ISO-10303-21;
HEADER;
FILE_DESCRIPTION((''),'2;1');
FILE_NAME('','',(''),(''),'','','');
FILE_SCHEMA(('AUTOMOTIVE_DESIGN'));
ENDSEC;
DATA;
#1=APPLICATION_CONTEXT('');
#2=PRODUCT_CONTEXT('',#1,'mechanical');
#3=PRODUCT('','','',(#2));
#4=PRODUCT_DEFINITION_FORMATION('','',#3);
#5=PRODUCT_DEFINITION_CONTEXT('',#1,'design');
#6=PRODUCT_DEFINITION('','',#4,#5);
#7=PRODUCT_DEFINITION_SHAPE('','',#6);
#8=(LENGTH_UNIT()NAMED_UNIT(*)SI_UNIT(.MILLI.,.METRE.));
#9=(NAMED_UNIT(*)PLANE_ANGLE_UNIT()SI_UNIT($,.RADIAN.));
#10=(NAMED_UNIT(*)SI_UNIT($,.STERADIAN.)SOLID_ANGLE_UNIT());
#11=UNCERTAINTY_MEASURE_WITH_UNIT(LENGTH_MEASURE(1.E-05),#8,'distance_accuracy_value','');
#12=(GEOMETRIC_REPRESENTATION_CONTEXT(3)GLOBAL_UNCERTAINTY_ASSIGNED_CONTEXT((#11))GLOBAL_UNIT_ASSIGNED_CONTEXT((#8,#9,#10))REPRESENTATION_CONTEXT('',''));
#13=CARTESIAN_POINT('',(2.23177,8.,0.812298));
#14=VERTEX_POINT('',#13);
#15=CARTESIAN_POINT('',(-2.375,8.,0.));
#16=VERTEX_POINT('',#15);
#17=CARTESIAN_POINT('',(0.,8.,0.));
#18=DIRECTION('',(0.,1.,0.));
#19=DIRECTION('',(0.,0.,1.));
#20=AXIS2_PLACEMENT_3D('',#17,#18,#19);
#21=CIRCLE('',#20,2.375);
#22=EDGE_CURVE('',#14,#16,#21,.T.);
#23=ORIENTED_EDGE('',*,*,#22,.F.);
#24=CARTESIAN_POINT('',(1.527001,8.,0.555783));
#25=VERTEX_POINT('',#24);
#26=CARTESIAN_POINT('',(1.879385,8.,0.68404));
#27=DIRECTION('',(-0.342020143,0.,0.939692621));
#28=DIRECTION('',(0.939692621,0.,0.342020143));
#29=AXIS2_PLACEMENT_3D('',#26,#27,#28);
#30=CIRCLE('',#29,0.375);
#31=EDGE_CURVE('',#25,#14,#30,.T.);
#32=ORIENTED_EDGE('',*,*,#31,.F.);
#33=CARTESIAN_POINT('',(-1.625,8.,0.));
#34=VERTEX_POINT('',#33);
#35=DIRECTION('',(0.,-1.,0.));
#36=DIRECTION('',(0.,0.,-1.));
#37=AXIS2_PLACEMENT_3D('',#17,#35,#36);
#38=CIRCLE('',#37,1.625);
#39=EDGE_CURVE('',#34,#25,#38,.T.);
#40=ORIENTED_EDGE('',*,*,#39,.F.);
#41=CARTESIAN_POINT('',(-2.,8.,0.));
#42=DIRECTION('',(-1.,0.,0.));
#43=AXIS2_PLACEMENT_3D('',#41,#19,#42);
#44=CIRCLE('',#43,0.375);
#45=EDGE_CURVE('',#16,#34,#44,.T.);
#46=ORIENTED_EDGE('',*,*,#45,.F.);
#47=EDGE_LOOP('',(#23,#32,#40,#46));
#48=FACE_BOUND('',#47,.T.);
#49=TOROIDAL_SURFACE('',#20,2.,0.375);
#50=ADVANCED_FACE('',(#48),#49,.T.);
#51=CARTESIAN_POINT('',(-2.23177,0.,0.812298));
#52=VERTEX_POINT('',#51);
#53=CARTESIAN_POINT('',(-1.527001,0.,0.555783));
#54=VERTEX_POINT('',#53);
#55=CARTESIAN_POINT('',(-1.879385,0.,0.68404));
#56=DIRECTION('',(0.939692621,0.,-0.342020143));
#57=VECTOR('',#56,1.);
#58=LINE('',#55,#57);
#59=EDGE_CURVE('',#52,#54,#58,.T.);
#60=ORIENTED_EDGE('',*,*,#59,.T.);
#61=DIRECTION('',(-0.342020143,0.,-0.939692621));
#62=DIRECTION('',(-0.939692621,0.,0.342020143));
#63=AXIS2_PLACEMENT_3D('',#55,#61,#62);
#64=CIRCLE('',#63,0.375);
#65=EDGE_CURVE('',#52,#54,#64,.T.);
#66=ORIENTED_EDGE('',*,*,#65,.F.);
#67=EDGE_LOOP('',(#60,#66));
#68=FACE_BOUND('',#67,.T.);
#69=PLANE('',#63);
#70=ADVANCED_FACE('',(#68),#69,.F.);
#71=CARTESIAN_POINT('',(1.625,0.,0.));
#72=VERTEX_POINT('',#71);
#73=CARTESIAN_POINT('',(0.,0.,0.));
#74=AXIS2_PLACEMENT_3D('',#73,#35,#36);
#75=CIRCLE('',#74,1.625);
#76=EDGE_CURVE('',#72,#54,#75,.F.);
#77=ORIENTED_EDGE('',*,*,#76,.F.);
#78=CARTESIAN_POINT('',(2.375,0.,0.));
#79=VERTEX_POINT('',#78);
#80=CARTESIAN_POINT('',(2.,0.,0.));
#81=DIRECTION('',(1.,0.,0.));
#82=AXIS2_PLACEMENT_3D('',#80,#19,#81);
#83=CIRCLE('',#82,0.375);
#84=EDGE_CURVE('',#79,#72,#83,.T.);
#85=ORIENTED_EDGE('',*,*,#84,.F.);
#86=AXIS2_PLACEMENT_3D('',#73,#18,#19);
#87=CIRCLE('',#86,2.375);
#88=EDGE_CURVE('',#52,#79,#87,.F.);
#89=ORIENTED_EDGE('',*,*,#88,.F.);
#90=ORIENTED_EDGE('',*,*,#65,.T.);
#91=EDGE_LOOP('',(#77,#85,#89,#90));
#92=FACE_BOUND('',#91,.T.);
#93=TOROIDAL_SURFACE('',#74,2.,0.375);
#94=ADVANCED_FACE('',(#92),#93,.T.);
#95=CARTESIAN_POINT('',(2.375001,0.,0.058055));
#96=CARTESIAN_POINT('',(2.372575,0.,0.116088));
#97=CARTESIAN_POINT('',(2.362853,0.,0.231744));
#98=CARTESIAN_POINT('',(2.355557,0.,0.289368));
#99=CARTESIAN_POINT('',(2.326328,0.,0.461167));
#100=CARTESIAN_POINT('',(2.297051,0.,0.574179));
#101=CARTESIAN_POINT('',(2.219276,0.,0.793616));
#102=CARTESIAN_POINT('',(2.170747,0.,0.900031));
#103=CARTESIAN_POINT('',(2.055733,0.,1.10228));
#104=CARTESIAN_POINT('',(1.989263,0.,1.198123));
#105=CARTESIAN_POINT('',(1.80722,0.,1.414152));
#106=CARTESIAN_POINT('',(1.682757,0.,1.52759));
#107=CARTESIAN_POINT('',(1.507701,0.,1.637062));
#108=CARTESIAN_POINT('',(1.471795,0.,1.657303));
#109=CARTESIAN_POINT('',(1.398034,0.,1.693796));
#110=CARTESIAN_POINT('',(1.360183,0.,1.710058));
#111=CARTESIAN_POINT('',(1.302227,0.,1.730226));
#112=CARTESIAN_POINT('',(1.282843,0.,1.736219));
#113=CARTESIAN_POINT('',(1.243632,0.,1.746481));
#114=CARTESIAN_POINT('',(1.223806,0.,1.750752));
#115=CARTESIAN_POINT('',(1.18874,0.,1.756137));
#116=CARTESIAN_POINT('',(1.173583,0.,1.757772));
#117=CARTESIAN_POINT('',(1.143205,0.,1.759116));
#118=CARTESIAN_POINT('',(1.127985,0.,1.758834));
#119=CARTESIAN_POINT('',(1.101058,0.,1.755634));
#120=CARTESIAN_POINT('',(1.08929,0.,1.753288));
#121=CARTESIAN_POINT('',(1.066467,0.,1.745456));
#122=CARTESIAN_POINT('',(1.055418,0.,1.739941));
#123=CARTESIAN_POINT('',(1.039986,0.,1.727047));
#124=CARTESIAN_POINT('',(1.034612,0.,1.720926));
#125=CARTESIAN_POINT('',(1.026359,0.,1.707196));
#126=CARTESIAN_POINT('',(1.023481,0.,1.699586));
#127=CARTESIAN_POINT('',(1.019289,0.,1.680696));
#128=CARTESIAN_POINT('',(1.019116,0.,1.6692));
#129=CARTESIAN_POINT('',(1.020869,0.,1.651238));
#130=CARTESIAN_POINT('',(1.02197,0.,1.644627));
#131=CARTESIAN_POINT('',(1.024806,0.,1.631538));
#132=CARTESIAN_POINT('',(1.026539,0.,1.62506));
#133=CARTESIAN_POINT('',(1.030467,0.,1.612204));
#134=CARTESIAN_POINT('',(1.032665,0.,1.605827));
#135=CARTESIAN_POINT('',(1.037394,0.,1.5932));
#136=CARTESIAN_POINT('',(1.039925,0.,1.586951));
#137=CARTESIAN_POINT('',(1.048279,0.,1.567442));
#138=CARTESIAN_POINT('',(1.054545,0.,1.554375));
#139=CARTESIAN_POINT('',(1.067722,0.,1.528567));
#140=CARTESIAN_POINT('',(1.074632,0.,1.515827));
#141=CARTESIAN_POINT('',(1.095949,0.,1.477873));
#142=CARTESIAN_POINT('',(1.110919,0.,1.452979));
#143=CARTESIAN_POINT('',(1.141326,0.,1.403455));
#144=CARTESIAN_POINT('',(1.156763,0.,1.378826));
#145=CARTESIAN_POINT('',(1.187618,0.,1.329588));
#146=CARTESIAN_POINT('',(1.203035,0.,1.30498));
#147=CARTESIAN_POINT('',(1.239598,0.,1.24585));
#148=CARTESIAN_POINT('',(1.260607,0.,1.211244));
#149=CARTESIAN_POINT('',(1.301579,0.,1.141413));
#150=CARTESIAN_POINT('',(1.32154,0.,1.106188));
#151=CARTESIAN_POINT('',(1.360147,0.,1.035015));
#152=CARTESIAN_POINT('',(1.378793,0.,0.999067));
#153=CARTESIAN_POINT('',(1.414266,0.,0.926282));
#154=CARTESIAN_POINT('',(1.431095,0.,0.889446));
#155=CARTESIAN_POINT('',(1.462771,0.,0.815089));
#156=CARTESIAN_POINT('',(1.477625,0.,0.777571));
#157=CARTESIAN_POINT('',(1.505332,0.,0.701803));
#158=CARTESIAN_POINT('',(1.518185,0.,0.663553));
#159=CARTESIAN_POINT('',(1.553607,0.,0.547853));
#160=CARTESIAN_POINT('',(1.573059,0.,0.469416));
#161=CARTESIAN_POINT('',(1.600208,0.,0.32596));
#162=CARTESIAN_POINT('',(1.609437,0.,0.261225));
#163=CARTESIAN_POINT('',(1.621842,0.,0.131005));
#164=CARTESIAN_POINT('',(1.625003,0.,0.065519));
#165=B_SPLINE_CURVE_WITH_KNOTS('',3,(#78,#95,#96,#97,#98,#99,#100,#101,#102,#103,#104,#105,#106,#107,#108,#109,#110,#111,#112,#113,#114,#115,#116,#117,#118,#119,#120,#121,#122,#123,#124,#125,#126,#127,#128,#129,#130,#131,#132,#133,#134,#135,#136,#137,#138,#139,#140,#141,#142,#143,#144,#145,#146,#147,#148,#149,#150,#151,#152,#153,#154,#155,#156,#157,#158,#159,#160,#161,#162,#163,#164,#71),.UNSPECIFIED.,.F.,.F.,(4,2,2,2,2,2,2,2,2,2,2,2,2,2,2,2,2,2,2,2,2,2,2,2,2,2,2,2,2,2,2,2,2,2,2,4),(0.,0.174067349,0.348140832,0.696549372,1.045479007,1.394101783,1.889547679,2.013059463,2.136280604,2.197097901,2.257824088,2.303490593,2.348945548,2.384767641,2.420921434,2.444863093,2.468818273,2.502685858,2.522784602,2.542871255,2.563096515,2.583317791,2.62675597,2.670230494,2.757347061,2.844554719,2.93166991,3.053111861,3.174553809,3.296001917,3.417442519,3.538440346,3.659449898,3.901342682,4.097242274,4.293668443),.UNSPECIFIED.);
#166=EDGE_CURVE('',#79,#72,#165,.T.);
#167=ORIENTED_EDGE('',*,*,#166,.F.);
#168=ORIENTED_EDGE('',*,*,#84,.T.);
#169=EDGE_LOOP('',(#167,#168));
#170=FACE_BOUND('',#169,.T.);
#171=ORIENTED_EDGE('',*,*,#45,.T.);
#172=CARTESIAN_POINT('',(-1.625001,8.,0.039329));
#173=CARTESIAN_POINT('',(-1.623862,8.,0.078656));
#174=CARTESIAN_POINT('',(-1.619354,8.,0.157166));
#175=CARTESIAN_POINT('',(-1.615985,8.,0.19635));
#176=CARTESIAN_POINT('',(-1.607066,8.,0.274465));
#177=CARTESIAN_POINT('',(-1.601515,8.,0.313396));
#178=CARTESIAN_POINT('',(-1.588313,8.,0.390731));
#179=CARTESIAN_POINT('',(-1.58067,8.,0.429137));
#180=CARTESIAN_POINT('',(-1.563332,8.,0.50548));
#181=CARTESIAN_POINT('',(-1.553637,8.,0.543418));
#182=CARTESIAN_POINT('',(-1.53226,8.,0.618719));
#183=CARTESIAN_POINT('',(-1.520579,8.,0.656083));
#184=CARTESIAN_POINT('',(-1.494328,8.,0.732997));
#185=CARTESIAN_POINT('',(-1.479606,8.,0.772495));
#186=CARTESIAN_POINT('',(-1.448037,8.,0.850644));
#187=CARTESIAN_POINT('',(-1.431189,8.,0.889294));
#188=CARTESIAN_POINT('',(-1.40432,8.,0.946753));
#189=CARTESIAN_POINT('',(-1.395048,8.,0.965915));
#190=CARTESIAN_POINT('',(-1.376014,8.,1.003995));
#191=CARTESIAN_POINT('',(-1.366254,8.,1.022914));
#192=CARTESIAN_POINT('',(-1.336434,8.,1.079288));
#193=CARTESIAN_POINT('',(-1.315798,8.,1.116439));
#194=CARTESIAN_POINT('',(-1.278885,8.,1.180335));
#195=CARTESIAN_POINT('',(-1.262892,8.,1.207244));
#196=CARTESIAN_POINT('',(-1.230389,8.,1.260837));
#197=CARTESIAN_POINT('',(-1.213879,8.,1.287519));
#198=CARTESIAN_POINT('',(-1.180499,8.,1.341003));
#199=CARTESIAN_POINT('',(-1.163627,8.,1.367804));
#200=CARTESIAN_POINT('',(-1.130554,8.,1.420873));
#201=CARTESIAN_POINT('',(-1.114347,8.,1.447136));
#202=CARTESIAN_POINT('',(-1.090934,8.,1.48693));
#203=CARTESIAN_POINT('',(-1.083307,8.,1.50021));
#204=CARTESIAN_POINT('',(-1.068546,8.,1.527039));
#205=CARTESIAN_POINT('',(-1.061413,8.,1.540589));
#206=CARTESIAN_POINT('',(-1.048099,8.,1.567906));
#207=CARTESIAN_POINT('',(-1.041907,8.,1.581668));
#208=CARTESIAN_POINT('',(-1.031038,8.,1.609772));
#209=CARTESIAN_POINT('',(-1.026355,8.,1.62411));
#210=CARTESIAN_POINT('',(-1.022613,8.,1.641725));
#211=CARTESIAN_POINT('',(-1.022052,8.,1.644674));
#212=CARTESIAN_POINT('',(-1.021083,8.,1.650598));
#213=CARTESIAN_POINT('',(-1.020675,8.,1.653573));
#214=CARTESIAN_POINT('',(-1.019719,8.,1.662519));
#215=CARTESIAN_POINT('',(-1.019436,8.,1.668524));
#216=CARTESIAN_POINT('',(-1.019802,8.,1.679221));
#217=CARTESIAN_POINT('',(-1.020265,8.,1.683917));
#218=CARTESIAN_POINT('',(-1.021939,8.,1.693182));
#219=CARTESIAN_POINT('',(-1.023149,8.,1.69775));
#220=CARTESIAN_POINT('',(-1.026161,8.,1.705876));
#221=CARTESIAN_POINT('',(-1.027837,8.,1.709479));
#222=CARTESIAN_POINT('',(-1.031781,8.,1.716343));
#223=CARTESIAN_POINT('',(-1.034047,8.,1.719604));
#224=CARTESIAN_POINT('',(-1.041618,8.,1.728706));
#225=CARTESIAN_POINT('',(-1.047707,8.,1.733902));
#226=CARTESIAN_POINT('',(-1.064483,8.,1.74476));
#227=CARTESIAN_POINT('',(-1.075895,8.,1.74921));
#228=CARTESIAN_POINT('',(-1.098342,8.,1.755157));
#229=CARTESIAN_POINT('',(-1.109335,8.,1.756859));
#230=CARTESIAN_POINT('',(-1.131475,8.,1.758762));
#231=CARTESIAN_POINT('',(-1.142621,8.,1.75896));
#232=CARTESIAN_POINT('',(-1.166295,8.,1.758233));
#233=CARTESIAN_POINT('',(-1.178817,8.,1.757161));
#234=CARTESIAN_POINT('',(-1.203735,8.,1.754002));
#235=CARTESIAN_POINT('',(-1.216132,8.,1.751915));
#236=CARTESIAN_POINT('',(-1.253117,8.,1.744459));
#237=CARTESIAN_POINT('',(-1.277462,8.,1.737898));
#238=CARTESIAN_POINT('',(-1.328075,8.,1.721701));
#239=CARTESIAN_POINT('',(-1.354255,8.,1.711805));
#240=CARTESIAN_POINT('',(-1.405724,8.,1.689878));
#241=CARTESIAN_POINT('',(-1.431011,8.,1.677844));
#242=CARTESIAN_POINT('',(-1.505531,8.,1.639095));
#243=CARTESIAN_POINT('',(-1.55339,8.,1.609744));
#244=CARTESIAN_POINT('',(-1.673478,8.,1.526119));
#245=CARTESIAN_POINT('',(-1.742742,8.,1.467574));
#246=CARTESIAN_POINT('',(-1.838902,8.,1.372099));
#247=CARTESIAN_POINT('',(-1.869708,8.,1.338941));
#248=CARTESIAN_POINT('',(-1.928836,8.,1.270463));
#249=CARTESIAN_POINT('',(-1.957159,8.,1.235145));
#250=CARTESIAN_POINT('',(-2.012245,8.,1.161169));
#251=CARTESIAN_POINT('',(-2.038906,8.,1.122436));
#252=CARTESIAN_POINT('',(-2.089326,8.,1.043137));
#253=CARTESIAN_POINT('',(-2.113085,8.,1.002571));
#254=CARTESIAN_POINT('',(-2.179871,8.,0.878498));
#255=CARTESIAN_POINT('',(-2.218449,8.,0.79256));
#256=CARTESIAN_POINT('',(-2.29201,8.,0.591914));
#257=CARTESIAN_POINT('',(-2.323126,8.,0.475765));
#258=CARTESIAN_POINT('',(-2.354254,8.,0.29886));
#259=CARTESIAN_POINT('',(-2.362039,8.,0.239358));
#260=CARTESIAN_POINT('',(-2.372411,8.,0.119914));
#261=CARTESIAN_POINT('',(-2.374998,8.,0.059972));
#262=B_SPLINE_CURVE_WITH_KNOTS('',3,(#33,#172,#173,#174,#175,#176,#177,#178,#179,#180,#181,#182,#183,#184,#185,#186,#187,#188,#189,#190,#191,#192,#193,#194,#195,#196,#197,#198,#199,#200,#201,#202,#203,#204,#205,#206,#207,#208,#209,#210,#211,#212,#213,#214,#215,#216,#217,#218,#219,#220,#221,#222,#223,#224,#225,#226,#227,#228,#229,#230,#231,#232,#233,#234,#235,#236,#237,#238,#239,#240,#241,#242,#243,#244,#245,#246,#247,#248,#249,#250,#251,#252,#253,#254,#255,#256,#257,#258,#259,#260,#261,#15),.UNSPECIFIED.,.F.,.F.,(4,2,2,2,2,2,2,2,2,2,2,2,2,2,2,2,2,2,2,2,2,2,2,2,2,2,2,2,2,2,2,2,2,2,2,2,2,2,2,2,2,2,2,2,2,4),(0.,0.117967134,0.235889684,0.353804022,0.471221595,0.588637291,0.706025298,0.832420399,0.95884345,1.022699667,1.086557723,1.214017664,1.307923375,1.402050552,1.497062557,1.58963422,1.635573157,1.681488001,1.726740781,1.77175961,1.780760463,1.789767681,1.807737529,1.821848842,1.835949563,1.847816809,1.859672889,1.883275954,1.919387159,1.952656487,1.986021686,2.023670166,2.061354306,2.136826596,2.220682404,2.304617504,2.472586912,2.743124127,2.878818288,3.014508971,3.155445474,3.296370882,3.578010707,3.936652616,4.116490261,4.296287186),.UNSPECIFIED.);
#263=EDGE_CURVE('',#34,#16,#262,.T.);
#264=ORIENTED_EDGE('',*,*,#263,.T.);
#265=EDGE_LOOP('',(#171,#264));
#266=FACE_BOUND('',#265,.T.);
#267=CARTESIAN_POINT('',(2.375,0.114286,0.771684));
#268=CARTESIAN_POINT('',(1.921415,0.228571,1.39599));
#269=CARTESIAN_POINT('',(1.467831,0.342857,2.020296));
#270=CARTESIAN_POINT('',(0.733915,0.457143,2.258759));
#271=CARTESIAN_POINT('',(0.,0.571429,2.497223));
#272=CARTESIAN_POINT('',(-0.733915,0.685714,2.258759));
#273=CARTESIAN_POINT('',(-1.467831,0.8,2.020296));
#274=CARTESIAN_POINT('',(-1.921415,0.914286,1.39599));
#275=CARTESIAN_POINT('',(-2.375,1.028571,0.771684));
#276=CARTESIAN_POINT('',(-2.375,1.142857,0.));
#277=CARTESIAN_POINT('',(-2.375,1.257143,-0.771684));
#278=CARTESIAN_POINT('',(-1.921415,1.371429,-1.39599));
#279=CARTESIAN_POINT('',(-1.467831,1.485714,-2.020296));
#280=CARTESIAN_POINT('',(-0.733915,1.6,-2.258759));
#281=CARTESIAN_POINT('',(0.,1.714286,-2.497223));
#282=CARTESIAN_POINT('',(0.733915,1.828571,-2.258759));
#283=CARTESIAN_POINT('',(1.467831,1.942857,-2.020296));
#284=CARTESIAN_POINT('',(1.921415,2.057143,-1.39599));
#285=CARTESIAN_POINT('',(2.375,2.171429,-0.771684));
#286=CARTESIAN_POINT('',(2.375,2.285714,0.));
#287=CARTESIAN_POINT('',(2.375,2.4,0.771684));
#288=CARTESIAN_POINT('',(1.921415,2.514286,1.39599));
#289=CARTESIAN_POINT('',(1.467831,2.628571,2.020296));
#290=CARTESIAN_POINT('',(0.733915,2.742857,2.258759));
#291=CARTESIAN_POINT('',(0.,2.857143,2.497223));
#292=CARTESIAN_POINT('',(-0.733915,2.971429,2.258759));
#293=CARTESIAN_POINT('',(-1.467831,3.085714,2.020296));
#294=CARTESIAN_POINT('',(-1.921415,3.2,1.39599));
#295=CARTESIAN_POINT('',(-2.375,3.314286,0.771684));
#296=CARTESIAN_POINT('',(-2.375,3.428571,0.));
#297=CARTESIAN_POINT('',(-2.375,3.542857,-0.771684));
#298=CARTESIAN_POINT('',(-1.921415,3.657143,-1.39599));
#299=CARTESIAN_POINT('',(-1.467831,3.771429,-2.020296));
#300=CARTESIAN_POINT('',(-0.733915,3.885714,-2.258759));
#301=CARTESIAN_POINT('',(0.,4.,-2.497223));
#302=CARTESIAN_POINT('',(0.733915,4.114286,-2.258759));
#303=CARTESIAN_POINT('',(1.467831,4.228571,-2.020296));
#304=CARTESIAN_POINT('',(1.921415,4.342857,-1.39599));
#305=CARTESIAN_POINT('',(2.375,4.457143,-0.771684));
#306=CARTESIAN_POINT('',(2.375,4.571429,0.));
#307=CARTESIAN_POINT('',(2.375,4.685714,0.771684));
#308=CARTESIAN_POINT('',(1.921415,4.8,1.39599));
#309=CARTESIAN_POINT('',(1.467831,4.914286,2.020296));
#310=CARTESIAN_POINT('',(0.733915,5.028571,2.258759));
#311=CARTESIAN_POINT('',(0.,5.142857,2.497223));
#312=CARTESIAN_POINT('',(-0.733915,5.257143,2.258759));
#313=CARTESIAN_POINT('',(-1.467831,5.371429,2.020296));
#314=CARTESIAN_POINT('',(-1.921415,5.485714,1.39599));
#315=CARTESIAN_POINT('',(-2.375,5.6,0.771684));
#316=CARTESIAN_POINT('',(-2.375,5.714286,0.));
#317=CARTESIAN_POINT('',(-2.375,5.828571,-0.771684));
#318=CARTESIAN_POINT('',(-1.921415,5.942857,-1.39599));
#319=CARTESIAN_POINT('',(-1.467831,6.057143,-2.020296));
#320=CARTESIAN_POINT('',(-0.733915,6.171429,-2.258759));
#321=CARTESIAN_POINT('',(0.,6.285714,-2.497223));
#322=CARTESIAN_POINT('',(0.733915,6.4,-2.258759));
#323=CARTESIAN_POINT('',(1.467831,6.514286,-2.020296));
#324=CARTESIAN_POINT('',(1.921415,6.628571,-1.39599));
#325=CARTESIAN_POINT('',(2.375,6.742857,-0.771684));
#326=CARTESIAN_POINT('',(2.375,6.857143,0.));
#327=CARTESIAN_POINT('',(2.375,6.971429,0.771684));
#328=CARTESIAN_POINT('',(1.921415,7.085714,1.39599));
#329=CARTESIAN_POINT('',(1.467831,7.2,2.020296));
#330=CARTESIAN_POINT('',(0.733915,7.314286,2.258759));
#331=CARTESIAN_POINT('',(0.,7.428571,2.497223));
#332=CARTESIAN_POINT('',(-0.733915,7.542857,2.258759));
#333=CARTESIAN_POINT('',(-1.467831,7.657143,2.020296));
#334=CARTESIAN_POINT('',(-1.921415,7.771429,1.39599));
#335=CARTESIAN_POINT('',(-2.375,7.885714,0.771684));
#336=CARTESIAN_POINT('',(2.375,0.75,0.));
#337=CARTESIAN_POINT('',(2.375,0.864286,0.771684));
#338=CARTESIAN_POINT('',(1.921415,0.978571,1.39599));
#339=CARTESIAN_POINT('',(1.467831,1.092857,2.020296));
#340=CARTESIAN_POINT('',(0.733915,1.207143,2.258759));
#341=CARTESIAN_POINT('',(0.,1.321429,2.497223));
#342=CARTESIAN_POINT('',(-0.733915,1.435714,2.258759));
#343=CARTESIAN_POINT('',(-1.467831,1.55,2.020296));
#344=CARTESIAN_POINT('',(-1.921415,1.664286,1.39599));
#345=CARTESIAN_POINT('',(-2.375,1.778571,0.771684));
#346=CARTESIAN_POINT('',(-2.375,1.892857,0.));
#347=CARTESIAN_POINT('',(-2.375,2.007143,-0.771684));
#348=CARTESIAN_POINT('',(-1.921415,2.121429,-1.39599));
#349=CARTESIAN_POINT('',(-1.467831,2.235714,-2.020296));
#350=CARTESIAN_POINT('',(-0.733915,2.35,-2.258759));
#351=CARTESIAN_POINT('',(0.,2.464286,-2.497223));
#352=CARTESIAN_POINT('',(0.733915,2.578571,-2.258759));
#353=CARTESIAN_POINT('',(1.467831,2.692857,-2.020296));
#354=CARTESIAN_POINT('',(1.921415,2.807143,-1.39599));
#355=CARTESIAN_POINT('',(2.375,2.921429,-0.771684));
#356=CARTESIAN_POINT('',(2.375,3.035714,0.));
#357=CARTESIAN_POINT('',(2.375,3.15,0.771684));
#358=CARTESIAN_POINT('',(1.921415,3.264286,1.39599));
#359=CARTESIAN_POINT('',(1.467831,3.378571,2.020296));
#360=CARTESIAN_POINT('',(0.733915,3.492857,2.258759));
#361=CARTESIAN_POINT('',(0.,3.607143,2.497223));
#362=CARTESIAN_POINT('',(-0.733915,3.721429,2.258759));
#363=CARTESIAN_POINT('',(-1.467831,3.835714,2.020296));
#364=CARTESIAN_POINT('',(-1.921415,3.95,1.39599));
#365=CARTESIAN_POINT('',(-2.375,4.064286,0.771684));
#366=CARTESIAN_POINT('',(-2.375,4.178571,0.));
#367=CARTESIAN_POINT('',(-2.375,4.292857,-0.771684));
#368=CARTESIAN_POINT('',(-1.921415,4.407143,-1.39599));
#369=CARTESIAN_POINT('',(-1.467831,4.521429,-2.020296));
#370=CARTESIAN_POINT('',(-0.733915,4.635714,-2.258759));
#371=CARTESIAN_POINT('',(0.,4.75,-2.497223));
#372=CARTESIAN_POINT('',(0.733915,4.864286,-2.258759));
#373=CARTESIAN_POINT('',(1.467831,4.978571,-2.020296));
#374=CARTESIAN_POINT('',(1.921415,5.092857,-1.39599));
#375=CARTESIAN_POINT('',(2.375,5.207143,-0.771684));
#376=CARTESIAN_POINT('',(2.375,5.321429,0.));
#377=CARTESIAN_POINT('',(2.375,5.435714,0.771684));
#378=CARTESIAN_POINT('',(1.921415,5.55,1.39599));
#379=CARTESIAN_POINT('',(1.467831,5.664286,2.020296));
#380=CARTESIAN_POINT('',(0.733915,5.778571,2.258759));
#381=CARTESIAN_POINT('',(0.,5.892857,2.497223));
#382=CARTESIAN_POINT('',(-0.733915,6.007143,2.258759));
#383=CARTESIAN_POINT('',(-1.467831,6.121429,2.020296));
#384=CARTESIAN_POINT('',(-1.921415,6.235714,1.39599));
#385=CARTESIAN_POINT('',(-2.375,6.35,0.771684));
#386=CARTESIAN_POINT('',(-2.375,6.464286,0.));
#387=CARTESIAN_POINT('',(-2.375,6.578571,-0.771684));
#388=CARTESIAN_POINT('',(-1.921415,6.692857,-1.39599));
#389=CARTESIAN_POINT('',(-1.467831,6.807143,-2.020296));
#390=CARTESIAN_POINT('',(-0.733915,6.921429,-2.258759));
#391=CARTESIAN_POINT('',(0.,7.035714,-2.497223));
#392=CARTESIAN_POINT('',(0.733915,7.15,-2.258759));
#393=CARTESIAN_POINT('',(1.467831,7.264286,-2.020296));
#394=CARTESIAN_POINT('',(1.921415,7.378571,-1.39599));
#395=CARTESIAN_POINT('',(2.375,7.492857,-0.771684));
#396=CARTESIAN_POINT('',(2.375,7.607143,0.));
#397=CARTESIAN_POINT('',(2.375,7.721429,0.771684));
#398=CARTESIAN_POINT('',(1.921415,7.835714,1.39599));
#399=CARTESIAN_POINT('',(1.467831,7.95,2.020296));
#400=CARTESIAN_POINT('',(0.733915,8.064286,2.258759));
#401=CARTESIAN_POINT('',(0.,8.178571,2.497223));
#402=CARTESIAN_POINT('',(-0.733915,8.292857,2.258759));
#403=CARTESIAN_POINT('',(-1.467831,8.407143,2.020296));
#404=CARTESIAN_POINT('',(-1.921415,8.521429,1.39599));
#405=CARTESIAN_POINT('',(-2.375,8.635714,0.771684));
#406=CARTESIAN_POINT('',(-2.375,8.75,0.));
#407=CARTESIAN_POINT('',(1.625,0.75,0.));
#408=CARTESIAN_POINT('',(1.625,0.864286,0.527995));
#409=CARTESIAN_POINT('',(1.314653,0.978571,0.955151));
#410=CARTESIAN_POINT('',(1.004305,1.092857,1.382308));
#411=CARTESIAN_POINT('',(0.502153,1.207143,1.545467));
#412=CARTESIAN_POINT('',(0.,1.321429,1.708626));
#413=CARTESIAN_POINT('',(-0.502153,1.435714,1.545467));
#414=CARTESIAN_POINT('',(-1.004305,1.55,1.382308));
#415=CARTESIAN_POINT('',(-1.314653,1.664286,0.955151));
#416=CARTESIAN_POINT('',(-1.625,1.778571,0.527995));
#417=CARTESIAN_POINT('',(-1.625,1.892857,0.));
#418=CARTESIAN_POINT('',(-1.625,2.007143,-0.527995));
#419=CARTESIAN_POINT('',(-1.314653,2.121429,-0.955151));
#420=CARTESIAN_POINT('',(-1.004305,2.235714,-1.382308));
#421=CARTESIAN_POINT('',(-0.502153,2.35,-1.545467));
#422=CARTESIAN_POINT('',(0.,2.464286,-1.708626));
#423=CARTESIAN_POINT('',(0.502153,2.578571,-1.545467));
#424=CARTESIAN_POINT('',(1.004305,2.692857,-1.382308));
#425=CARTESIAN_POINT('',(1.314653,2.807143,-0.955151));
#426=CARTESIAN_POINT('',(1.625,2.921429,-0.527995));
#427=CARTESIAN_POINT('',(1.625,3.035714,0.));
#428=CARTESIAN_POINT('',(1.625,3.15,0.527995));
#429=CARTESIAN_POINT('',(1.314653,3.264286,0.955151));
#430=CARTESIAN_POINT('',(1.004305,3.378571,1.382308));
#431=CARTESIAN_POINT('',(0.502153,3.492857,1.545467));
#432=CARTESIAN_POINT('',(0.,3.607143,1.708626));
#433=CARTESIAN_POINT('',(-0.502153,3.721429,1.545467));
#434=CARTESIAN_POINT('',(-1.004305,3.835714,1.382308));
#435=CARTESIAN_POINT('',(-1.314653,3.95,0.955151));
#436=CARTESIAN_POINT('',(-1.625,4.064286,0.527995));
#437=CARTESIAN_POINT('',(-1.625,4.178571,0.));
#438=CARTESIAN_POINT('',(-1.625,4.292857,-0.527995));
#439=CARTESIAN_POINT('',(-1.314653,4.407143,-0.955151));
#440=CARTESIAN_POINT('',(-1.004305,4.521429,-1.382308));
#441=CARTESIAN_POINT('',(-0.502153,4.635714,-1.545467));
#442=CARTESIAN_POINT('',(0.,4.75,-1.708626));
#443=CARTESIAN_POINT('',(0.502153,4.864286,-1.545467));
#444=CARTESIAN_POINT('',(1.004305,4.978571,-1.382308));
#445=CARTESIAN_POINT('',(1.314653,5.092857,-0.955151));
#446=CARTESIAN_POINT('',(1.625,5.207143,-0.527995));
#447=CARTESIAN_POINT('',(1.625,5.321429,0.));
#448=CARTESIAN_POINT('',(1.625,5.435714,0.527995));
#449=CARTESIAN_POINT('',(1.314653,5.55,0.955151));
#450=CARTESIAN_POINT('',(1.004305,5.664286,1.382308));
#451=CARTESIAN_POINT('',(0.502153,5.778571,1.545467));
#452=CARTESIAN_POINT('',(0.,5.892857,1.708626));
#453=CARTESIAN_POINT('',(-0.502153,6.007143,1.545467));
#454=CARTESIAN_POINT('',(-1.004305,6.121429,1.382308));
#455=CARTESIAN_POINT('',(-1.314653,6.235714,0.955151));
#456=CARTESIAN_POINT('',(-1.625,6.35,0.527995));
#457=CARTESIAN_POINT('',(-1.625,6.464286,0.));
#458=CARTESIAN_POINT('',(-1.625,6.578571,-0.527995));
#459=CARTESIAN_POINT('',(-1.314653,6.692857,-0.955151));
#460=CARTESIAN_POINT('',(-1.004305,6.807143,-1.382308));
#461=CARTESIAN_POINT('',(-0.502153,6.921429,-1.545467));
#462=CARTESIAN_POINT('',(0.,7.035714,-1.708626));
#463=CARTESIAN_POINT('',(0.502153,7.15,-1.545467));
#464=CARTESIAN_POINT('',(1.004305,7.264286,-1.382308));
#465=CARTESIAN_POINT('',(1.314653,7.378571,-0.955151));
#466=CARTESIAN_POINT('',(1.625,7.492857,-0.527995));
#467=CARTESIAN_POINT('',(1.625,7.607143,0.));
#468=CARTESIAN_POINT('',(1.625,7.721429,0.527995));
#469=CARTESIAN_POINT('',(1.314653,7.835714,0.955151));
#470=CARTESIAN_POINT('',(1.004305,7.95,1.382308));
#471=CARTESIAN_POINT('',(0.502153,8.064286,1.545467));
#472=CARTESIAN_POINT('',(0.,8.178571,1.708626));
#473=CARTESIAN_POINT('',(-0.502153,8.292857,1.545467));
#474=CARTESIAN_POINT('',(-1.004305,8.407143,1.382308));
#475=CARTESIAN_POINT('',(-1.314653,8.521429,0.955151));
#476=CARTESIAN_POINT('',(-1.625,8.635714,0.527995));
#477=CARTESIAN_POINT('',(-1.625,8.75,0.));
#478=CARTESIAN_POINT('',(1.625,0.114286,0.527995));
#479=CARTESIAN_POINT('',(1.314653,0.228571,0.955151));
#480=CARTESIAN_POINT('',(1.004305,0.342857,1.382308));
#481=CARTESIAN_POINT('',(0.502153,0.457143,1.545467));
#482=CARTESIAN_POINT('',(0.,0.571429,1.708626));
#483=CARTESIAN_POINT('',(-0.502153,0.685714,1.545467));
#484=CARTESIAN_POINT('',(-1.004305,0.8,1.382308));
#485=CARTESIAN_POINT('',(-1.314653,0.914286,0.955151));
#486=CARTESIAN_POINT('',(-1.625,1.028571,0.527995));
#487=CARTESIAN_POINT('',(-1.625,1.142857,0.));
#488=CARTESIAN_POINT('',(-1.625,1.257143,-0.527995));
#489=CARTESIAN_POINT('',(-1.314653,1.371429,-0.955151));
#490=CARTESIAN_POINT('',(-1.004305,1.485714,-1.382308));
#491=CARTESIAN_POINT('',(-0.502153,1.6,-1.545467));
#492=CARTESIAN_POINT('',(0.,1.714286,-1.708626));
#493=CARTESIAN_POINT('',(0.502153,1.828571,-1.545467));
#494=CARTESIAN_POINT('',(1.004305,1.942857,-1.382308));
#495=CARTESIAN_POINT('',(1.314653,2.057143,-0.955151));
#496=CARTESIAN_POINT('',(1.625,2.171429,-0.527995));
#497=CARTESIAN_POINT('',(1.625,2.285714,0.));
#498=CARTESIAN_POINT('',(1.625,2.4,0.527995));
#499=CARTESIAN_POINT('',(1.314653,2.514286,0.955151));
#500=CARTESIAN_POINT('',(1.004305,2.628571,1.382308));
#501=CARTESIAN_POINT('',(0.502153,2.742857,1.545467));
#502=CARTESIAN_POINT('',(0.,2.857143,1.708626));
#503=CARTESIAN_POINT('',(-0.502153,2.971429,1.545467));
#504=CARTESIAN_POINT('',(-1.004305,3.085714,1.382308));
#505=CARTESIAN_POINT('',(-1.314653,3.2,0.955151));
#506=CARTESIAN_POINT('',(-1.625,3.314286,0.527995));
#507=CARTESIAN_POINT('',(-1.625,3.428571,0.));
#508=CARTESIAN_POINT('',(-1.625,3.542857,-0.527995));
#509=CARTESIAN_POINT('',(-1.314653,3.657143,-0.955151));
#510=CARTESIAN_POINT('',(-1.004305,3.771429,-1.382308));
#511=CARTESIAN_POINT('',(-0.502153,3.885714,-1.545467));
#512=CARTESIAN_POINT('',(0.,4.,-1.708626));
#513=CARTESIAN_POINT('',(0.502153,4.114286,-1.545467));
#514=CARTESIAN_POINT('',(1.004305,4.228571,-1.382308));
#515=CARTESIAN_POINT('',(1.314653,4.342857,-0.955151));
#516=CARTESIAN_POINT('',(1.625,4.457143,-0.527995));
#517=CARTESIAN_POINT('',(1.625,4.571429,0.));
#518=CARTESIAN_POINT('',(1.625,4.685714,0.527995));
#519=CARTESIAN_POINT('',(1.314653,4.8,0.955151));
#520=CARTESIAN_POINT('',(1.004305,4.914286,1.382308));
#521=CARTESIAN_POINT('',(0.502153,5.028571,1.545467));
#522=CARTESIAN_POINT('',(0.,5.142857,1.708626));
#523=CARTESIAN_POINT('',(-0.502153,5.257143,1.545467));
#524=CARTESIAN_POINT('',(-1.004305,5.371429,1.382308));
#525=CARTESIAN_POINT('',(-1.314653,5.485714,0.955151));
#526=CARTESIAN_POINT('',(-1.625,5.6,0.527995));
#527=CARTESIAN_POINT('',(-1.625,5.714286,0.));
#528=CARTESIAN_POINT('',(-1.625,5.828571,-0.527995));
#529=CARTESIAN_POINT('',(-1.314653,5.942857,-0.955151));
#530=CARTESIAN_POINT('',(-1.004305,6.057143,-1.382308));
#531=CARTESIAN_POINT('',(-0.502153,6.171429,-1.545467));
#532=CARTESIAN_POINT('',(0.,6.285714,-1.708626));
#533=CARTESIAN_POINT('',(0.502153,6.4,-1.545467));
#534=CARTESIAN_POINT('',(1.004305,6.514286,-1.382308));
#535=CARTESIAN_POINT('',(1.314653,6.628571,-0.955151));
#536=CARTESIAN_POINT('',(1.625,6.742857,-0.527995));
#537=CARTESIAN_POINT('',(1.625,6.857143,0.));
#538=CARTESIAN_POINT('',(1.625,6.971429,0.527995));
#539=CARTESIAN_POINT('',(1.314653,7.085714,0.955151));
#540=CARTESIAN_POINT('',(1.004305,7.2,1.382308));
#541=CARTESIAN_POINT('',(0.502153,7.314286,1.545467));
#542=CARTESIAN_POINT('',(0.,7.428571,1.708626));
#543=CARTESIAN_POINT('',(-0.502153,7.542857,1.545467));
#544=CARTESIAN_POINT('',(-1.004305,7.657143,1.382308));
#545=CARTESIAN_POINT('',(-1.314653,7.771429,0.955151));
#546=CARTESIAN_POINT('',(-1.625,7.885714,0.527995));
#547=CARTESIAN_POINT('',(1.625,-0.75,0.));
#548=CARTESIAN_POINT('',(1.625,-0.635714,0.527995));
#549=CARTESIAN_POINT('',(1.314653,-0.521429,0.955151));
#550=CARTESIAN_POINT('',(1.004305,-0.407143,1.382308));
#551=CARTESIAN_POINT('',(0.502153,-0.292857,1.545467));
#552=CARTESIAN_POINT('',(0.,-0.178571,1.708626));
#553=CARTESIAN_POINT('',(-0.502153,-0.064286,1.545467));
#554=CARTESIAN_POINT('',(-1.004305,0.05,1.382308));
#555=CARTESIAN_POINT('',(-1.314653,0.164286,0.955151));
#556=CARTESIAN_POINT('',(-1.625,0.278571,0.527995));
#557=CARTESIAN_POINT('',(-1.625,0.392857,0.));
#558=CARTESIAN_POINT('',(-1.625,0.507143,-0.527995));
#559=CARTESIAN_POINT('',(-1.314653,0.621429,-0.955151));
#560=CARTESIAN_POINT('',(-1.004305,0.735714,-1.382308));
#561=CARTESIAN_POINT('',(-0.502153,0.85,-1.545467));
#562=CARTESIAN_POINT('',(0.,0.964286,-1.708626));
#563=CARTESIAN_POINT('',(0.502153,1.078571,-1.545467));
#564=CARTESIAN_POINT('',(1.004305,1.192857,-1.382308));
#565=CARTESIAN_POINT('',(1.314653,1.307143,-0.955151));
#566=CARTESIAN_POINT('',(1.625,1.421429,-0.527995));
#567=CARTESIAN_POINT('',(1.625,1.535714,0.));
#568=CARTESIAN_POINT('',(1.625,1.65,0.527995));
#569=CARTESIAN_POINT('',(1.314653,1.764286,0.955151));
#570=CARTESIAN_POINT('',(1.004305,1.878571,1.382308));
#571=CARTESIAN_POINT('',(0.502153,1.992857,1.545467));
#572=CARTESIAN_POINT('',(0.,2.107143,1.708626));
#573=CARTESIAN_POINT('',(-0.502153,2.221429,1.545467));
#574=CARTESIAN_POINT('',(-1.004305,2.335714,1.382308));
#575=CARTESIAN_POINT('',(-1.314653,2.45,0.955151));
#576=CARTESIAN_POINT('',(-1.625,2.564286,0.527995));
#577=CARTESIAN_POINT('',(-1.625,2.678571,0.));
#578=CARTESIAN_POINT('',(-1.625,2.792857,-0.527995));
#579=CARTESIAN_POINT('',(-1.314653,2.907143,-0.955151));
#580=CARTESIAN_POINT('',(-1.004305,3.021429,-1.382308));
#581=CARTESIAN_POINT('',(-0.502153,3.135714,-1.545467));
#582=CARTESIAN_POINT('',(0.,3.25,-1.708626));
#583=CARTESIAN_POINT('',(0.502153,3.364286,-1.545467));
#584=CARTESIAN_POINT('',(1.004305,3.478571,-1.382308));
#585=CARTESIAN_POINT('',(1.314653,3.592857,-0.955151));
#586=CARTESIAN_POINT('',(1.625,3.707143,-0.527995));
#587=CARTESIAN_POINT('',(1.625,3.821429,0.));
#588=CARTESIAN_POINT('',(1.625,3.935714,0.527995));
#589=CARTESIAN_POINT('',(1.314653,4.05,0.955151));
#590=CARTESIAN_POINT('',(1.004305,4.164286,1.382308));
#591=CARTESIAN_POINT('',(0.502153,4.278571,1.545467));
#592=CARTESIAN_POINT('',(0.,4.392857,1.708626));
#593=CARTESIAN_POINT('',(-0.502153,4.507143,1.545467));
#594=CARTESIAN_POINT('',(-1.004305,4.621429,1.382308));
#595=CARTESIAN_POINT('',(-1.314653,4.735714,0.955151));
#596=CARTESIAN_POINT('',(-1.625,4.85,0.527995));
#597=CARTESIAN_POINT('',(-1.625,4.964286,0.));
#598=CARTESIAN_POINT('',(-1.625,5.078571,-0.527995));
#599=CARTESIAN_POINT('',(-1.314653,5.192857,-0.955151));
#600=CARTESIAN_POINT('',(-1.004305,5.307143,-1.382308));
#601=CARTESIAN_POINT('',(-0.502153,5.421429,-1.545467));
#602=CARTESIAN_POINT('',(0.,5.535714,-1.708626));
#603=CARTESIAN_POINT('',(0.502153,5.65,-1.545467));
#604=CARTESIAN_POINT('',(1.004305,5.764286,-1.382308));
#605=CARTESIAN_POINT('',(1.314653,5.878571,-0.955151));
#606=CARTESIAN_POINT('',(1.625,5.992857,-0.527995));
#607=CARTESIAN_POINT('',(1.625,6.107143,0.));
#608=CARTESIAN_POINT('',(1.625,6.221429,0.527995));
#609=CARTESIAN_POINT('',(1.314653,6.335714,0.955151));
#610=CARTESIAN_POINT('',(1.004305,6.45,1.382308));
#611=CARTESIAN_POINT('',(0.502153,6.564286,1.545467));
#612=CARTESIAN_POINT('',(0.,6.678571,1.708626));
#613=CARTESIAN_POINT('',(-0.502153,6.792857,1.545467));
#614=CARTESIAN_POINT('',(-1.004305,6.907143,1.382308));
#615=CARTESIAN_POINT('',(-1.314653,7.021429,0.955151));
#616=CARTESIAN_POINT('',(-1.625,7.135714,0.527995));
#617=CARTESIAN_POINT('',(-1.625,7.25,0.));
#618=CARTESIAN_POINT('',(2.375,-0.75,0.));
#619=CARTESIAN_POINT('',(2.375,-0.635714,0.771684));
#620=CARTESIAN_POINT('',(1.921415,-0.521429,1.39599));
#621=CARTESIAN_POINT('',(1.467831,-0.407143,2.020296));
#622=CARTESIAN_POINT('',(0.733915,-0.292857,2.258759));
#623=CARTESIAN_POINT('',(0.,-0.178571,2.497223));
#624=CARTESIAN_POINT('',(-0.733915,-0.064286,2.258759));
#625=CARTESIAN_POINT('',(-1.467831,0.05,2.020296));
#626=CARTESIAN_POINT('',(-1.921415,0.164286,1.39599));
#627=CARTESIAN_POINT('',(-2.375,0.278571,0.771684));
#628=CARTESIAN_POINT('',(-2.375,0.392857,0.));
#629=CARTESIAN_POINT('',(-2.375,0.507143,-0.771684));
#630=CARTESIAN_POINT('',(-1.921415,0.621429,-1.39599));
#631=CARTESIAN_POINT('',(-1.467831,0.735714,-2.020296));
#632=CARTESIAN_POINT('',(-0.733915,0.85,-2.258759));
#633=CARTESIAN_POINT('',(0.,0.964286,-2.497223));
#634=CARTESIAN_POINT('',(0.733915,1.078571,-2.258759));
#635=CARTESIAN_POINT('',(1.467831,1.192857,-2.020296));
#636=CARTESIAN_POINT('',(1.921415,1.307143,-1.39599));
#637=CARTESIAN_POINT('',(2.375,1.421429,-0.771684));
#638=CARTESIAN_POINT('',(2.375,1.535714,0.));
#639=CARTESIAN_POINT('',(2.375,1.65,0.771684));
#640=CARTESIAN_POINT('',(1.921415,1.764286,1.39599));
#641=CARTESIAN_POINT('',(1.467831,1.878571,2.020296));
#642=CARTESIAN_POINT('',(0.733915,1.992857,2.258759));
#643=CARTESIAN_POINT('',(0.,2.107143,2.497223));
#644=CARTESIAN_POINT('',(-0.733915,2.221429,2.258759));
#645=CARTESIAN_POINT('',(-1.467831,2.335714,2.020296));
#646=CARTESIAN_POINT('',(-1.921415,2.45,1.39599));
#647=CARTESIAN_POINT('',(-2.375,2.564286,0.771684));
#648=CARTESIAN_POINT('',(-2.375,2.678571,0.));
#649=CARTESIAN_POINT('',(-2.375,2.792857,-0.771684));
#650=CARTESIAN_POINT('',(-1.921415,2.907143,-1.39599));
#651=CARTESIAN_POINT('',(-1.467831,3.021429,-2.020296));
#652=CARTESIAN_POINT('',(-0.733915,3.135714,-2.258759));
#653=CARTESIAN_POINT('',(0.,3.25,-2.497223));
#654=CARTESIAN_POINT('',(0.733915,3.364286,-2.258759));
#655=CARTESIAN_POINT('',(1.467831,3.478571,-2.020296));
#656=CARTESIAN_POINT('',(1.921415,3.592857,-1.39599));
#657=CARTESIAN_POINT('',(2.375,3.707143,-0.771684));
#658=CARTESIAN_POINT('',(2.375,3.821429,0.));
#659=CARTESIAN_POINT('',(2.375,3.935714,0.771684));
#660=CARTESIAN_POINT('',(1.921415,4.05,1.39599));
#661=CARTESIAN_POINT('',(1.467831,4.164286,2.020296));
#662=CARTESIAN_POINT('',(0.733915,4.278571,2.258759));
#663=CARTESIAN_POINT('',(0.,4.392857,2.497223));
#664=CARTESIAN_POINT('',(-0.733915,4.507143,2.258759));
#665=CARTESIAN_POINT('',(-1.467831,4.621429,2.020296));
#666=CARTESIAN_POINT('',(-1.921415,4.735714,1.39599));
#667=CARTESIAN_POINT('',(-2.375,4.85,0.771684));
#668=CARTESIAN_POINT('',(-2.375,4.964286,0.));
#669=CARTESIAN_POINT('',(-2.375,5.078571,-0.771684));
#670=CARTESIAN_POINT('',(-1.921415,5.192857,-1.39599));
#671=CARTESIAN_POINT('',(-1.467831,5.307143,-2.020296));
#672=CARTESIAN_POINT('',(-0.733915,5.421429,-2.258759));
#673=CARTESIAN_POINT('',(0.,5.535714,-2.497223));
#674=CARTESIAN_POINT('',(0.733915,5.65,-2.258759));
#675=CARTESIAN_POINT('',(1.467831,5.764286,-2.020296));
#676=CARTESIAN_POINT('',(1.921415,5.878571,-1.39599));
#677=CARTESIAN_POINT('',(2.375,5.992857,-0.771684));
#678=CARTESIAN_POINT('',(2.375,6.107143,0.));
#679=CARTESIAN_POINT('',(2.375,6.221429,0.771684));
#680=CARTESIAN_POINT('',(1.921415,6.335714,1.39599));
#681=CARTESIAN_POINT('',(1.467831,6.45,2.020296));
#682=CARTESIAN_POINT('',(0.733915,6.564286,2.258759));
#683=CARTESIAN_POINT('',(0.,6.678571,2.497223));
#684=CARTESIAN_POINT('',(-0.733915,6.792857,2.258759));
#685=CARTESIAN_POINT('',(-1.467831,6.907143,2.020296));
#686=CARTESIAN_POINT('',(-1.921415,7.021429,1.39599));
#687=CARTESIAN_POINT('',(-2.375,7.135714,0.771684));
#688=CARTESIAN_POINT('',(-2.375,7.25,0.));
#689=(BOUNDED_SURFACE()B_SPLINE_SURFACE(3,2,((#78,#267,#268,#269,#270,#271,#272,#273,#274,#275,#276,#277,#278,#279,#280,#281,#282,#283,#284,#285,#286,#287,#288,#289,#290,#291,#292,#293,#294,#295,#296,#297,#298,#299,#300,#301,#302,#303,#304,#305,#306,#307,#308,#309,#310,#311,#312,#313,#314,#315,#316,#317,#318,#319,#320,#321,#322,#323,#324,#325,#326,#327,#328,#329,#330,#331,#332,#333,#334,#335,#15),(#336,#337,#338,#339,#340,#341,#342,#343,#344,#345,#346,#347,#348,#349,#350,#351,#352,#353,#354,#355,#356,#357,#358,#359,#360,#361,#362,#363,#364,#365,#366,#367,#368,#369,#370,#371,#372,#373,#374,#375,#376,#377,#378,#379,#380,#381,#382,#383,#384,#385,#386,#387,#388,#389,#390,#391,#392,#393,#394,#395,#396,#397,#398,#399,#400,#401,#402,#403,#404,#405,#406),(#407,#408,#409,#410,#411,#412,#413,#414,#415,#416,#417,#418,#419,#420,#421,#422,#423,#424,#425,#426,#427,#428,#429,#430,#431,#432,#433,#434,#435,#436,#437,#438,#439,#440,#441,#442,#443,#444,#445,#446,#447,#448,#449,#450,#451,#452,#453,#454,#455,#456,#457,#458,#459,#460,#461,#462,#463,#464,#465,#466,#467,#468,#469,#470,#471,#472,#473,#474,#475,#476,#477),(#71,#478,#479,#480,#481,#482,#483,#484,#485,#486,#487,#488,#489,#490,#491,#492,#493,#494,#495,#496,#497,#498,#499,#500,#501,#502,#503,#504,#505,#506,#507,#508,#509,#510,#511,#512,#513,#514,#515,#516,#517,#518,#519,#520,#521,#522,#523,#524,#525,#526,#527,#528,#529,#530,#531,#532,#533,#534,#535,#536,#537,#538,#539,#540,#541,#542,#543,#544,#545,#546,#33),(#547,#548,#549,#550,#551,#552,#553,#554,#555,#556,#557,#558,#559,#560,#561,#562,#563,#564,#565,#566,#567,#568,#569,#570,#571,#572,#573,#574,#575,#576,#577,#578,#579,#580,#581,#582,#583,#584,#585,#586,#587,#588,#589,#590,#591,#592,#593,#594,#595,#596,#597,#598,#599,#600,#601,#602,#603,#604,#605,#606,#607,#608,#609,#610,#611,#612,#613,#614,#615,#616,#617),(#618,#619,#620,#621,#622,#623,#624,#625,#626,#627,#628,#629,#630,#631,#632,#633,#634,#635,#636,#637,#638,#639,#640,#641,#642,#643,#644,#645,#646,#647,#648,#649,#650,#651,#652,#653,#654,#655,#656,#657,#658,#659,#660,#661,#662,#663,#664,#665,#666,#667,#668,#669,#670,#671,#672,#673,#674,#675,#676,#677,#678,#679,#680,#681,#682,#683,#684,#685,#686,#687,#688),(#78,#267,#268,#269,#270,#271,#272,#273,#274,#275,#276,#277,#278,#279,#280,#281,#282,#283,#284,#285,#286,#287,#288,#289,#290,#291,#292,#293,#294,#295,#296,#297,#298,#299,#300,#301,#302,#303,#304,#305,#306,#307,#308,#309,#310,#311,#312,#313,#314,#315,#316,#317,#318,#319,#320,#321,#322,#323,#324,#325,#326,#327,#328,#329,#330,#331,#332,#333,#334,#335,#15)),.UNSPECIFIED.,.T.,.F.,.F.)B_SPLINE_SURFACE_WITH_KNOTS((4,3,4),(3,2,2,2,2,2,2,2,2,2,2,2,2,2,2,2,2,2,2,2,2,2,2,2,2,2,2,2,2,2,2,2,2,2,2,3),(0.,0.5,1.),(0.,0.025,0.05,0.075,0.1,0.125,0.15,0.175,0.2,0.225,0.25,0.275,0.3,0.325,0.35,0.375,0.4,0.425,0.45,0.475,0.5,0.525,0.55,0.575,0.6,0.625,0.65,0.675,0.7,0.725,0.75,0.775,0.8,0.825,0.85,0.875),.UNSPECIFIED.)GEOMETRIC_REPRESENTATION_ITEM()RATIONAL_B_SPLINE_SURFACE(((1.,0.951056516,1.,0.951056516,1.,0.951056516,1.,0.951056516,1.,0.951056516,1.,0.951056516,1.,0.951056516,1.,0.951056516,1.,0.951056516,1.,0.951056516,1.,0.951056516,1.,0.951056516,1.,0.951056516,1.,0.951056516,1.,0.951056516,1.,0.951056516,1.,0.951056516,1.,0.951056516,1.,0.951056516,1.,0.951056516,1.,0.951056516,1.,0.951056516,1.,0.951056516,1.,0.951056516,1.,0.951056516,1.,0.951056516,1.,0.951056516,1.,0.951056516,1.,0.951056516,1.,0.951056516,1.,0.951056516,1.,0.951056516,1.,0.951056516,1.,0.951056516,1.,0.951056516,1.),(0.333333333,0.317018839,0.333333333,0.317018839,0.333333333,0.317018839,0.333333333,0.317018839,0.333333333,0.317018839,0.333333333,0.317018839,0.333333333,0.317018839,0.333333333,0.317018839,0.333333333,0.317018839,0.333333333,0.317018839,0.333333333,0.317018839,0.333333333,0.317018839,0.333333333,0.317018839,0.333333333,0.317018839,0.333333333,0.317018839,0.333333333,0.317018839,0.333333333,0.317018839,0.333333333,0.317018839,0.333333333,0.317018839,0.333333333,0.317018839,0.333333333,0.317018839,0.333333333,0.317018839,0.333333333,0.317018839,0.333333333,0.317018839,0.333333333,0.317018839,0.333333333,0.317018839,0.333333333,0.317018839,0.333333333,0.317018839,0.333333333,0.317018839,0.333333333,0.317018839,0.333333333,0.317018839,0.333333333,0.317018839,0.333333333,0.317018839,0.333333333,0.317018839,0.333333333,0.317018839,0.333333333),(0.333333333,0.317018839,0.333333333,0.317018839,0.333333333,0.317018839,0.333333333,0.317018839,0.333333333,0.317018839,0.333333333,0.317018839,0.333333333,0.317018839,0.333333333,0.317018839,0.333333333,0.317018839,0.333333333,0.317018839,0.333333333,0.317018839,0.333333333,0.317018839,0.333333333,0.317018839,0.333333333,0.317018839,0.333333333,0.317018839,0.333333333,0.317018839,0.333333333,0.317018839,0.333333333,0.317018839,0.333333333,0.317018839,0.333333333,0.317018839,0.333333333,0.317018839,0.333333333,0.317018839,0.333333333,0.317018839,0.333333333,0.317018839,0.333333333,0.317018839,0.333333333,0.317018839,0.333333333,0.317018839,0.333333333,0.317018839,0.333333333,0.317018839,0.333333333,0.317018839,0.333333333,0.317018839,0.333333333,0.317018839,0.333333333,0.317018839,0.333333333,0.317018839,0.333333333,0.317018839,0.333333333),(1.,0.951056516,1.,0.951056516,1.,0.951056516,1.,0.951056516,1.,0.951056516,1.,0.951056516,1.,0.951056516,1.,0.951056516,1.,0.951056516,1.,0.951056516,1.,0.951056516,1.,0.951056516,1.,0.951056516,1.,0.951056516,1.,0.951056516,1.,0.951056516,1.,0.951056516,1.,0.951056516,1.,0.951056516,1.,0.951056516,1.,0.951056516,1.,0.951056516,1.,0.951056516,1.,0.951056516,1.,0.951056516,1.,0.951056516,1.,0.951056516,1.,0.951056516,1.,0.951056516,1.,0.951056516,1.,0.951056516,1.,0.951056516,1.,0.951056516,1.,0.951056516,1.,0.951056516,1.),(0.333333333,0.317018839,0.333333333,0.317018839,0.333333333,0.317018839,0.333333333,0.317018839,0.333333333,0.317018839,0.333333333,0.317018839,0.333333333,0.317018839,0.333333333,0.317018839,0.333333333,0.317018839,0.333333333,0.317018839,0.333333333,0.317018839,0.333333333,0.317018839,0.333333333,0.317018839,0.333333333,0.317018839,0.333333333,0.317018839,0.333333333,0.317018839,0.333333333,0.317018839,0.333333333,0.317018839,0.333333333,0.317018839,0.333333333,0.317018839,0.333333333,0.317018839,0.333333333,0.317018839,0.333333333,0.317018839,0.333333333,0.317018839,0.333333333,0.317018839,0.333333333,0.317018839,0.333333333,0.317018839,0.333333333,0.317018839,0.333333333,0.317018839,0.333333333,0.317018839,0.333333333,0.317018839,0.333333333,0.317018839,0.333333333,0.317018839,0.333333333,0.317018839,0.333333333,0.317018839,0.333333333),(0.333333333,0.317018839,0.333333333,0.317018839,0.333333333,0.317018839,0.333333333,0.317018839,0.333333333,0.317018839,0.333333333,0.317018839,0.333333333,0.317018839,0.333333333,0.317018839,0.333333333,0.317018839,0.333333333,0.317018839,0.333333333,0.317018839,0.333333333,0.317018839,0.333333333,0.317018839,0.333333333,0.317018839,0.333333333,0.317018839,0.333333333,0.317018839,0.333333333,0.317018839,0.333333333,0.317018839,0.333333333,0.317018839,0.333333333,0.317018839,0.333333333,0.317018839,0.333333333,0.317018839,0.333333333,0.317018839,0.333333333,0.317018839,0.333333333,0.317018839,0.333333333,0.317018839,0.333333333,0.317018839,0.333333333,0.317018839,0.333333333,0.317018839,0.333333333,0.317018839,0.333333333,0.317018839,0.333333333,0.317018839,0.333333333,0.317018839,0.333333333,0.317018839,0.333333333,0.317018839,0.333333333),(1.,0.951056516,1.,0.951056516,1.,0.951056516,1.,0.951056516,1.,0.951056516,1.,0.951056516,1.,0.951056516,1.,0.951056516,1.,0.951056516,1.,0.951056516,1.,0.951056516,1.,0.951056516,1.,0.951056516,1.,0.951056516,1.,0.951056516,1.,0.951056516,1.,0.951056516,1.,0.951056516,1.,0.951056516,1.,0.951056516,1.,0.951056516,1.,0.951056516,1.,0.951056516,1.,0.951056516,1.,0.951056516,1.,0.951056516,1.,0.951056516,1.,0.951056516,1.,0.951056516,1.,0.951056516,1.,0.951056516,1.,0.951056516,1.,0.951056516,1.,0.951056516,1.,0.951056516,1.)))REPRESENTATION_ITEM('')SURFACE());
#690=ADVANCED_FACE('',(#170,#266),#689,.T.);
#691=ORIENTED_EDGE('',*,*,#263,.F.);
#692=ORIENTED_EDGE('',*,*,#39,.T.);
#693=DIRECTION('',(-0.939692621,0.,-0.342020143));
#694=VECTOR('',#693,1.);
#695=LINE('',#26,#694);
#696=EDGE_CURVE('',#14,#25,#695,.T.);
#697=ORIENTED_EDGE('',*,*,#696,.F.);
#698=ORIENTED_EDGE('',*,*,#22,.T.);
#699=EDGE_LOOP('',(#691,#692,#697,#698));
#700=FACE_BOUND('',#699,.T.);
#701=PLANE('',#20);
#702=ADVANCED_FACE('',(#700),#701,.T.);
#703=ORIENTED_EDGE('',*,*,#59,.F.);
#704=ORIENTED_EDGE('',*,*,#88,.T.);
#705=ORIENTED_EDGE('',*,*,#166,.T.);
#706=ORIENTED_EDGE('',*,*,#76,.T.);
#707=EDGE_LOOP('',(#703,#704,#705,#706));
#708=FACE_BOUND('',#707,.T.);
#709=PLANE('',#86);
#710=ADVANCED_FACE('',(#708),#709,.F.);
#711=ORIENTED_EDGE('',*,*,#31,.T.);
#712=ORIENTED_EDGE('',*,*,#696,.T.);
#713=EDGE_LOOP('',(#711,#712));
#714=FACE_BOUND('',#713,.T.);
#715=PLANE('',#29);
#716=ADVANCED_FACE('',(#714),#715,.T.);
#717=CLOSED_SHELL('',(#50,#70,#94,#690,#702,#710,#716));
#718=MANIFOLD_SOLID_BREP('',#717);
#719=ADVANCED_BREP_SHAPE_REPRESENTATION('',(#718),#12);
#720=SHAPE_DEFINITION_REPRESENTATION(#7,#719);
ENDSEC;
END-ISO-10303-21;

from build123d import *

# Parameters (mm, degrees)
SWEEP1_PITCH       = 2.285714286
SWEEP1_HEIGHT      = 8
SWEEP1_RADIUS      = 2
SWEEP1_START_ANGLE = 90
SKETCH1_R          = 0.375
SKETCH1_3_R        = 0.375
REVOLVE1_ANGLE     = 200
SKETCH4_R          = 2.5
CUT_EXTRUDE1_DEPTH = 10.023409681
SKETCH6_R          = 0.375
REVOLVE2_ANGLE     = 200
SKETCH7_R          = 2.5
CUT_EXTRUDE2_DEPTH = 10.023409681


with BuildPart() as part:
    # Sweep1: sweep along a helix
    with BuildLine() as sweep1_path:
        add(Helix(SWEEP1_PITCH, SWEEP1_HEIGHT, SWEEP1_RADIUS, center=(0, 0, 0), direction=(0, 1, 0), lefthand=True, mode=Mode.PRIVATE).rotate(Axis((0, 0, 0), (0, 1, 0)), SWEEP1_START_ANGLE))
    # Sketch1 → Sweep1 (sweep)
    with BuildSketch(Plane.XY):
        with Locations((2, 0)):
            Circle(SKETCH1_R)
    sweep(path=sweep1_path.line, is_frenet=True)

    # Sketch1<3> → Revolve1 (revolve)
    with BuildSketch(Plane.XY):
        with Locations((2, 0)):
            Circle(SKETCH1_3_R)
    revolve(axis=Axis((0, 0, 0), (0, 1, 0)), revolution_arc=REVOLVE1_ANGLE)

    # Sketch4 → Cut-Extrude1 (cut, through all)
    with BuildSketch(Plane(origin=(0, 0, 0), x_dir=(1, 0, 0), z_dir=(0, 1, 0))):
        Circle(SKETCH4_R)
    extrude(amount=-CUT_EXTRUDE1_DEPTH, mode=Mode.SUBTRACT)

    # Sketch6 → Revolve2 (revolve)
    with BuildSketch(Plane(origin=(0, 0, 0), x_dir=(-1, 0, 0), z_dir=(0, 0, -1))):
        with Locations((2, 8)):
            Circle(SKETCH6_R)
    revolve(axis=Axis((0, 0, 0), (0, -1, 0)), revolution_arc=REVOLVE2_ANGLE)

    # Sketch7 → Cut-Extrude2 (cut, through all)
    with BuildSketch(Plane(origin=(0, 8, 0), x_dir=(1, 0, 0), z_dir=(0, 1, 0))):
        Circle(SKETCH7_R)
    extrude(amount=CUT_EXTRUDE2_DEPTH, mode=Mode.SUBTRACT)


solid = part.part
